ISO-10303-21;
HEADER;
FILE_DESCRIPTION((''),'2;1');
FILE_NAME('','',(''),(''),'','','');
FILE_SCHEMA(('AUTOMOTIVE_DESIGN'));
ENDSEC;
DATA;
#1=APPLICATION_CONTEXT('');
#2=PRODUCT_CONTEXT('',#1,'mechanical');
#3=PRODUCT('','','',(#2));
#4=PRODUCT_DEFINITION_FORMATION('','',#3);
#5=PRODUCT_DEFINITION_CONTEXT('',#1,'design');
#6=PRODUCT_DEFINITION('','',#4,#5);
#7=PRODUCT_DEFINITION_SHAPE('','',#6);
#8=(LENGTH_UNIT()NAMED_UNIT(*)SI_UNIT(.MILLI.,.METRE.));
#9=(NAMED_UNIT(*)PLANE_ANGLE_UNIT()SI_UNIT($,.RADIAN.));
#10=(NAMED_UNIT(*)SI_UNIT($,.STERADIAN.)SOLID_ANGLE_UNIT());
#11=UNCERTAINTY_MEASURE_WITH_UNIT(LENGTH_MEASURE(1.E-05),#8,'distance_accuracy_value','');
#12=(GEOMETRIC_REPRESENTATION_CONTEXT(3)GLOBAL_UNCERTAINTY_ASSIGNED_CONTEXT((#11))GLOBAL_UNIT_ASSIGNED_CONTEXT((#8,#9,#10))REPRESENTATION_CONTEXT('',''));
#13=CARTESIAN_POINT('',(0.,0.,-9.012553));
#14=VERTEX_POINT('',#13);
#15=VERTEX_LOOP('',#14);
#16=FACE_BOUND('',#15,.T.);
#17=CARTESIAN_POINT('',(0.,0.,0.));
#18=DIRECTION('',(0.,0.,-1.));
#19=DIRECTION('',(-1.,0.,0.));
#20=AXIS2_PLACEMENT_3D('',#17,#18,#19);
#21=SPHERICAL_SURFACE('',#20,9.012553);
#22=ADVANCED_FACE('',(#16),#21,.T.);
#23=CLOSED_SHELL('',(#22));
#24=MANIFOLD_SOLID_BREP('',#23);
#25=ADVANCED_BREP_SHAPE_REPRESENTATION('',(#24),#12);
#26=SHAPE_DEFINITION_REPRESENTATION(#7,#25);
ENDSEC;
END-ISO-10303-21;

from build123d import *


# Not quite as in the source:
# - the program builds the solid bodies; features that only make, move or delete a surface that nothing else refers to are left out


with BuildPart() as f3:
    # F2 (on Front) → F3 (revolve)
    with BuildSketch(Plane.XZ):
        with BuildLine():
            ThreePointArc((0, 9.0125529096), (-9.0125529096, 0), (0, -9.0125529096))
            Line((0, -9.0125529096), (0, 9.0125529096))
        make_face()
    revolve(axis=Axis((0, 0, 0), (0, 0, -1)))


solid = f3.part
